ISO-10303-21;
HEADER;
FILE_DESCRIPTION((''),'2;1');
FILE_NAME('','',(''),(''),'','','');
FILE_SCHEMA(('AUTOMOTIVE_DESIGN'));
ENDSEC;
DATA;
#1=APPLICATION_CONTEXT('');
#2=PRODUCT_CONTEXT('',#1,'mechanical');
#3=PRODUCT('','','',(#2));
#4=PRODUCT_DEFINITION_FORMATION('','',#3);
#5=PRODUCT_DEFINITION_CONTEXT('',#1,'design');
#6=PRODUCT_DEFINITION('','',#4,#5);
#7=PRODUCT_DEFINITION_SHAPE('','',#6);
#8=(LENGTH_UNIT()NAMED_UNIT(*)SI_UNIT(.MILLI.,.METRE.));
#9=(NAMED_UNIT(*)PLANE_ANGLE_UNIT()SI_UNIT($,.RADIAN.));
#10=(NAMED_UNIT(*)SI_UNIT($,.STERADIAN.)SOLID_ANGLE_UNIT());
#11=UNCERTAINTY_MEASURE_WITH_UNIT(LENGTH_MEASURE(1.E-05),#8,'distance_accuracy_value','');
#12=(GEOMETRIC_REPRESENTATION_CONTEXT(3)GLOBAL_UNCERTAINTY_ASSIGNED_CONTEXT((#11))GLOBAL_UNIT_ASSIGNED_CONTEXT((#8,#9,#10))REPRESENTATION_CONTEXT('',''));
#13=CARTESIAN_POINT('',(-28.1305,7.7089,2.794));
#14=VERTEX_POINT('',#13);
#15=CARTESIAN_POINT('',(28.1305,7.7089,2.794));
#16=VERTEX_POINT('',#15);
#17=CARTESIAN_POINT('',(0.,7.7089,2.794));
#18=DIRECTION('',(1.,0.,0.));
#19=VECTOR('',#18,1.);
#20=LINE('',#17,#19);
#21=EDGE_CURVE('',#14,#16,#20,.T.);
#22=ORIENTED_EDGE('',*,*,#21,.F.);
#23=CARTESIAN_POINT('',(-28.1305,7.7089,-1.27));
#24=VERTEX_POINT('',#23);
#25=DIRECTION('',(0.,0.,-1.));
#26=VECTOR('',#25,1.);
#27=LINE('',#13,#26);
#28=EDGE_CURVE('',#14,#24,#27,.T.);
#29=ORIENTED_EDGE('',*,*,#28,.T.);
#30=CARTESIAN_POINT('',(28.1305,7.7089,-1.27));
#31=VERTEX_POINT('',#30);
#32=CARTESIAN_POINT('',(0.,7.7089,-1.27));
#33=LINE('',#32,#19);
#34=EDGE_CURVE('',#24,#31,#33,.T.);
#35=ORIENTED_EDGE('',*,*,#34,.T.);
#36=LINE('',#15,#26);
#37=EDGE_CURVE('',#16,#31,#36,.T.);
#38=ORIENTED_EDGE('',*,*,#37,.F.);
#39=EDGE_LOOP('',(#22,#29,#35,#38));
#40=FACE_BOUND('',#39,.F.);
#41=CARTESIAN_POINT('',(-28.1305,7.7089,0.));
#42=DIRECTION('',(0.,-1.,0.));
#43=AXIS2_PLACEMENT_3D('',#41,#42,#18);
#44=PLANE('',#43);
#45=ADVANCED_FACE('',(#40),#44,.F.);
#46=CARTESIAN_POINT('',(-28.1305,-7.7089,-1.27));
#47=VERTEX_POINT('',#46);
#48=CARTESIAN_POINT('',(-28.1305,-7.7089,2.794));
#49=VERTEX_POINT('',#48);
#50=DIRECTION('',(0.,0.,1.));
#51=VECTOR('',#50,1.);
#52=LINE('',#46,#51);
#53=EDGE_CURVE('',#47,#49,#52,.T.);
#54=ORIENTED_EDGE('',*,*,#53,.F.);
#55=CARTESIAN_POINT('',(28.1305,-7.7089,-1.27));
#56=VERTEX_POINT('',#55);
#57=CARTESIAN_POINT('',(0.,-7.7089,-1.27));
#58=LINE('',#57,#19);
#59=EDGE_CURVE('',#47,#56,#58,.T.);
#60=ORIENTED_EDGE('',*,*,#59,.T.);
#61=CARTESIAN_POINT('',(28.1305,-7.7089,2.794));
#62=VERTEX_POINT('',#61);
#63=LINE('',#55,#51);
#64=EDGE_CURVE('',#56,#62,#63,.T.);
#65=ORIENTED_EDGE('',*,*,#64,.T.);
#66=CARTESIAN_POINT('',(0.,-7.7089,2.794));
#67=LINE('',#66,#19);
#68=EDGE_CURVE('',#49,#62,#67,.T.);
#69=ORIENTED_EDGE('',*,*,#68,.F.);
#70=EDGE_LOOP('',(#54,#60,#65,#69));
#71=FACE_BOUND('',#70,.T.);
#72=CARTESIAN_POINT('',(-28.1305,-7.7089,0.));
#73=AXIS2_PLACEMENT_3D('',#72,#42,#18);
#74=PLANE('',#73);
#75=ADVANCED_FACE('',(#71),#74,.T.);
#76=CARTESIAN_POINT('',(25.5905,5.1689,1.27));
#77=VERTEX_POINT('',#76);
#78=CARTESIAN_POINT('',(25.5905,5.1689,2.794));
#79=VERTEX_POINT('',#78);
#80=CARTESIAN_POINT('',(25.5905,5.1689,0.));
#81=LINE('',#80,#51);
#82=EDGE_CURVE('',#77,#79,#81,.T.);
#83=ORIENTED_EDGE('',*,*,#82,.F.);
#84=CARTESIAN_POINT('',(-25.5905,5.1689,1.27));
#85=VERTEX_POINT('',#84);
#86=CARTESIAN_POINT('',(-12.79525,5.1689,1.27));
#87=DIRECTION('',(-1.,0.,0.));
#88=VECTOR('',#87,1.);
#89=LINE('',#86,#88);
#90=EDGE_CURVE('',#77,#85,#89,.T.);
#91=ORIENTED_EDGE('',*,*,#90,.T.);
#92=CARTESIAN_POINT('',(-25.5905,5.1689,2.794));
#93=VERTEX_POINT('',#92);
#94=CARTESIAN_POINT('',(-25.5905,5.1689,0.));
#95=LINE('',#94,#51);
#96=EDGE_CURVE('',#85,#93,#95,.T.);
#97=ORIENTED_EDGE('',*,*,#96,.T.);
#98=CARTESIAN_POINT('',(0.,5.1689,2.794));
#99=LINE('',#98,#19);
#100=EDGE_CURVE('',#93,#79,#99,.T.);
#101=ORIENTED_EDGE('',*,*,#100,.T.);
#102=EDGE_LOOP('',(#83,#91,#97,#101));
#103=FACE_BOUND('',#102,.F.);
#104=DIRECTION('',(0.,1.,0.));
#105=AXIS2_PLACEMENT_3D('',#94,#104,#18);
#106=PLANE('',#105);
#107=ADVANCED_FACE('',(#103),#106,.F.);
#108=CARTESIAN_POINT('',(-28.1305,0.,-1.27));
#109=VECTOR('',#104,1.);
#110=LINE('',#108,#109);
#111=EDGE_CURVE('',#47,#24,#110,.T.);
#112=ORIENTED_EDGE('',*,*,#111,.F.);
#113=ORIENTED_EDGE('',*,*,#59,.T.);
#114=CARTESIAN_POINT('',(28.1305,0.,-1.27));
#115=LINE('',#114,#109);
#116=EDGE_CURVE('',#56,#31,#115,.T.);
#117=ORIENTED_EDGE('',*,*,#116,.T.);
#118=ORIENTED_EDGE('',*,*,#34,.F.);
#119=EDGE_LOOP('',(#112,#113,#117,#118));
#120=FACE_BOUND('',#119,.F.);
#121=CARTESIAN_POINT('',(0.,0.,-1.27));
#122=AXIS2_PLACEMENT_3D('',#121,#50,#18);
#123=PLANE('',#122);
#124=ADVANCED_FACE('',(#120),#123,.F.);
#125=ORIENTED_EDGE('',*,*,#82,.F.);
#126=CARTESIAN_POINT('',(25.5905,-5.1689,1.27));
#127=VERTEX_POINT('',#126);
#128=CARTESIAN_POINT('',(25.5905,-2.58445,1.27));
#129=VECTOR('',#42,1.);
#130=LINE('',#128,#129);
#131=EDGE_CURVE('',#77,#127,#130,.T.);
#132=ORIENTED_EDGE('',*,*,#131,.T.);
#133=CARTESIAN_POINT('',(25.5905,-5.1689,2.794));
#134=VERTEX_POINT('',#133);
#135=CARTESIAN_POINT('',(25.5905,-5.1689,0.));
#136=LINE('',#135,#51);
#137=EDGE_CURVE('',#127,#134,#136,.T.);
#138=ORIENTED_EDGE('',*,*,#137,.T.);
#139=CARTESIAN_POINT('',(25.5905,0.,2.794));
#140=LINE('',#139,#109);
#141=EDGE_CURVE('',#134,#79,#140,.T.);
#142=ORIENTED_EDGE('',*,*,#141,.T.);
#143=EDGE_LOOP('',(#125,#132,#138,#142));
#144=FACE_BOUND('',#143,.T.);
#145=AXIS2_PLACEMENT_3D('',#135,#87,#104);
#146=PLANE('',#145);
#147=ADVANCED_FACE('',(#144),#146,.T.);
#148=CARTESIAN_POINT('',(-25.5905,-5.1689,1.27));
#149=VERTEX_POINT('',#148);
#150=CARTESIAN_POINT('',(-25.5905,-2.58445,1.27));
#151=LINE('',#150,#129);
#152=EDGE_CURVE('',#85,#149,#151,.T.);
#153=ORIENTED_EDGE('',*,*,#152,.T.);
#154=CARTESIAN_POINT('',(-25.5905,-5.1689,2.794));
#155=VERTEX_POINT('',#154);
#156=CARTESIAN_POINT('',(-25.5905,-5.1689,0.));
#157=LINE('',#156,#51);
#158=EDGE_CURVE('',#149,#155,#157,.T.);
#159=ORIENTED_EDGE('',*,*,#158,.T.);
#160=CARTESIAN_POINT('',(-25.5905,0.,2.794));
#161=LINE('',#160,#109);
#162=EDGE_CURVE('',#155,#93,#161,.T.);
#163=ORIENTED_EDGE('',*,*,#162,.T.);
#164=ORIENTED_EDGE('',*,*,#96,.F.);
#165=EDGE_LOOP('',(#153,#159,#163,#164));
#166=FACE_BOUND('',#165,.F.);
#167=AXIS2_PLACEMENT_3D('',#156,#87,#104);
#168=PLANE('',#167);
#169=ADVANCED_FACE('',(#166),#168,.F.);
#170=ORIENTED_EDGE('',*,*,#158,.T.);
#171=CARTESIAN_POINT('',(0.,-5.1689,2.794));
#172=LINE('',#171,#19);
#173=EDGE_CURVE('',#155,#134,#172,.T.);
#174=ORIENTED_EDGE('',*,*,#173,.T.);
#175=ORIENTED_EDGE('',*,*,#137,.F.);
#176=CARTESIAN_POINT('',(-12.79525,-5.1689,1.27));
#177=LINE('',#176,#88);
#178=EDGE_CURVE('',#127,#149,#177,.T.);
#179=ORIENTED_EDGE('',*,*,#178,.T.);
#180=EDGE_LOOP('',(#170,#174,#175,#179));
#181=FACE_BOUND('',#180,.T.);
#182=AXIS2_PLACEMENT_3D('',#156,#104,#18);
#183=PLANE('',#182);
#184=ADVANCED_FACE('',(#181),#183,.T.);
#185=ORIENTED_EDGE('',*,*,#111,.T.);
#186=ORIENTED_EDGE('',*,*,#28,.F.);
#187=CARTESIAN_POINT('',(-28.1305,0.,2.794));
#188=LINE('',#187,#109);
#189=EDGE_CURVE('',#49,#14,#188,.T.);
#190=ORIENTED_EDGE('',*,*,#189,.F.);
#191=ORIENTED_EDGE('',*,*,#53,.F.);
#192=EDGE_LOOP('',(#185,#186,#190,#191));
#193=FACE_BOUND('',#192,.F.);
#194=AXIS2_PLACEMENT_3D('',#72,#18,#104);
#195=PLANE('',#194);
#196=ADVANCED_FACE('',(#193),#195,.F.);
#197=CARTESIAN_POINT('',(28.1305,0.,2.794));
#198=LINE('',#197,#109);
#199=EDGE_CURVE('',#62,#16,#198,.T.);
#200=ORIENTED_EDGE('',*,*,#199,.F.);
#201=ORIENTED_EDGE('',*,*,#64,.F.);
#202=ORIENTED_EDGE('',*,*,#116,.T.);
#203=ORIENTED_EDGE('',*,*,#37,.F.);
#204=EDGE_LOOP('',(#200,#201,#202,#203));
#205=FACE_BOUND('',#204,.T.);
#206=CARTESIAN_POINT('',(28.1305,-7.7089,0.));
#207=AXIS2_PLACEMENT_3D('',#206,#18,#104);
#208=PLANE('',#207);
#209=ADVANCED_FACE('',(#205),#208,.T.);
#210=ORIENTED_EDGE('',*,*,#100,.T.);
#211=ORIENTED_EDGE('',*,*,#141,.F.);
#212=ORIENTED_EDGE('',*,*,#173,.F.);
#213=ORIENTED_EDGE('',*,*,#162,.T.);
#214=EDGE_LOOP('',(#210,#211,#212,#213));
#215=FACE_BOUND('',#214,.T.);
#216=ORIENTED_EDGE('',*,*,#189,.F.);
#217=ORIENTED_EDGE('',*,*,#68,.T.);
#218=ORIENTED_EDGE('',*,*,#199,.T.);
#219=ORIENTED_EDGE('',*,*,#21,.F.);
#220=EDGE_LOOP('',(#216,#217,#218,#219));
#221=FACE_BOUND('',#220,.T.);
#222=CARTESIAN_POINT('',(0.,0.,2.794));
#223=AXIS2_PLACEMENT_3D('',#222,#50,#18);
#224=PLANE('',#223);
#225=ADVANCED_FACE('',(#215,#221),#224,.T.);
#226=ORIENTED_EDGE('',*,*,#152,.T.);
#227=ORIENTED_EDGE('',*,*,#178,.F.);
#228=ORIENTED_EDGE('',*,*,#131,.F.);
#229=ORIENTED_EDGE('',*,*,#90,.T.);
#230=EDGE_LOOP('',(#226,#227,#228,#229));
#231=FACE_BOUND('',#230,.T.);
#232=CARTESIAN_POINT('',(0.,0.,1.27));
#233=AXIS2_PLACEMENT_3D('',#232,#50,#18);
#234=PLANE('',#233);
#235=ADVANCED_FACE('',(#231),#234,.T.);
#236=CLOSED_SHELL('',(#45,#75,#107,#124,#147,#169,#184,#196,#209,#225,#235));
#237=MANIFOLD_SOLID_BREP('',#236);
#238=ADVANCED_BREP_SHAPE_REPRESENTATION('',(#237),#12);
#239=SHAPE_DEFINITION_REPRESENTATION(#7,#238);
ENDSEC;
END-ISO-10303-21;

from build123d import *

# Parameters (mm, degrees)
F0_W     = 56.261
F0_H     = 15.4178
F0_W_2   = 51.181
F0_H_2   = 10.3378
F1_DEPTH = 1.27
F2_DEPTH = 2.794


# Not quite as in the source:
# - a feature names something its author has since deleted; it is built from what else it names


with BuildPart() as f1:
    # F0 (on Top) → F1 (new body, symmetric)
    with BuildSketch(Plane.XY):
        Rectangle(F0_W, F0_H)
        Rectangle(F0_W_2, F0_H_2, mode=Mode.SUBTRACT)
        Rectangle(F0_W_2, F0_H_2)
    extrude(amount=F1_DEPTH, both=True)

    # F0 (on Top) → F2 (join)
    with BuildSketch(Plane.XY):
        Rectangle(F0_W, F0_H)
        Rectangle(F0_W_2, F0_H_2, mode=Mode.SUBTRACT)
    extrude(amount=F2_DEPTH)


solid = f1.part
